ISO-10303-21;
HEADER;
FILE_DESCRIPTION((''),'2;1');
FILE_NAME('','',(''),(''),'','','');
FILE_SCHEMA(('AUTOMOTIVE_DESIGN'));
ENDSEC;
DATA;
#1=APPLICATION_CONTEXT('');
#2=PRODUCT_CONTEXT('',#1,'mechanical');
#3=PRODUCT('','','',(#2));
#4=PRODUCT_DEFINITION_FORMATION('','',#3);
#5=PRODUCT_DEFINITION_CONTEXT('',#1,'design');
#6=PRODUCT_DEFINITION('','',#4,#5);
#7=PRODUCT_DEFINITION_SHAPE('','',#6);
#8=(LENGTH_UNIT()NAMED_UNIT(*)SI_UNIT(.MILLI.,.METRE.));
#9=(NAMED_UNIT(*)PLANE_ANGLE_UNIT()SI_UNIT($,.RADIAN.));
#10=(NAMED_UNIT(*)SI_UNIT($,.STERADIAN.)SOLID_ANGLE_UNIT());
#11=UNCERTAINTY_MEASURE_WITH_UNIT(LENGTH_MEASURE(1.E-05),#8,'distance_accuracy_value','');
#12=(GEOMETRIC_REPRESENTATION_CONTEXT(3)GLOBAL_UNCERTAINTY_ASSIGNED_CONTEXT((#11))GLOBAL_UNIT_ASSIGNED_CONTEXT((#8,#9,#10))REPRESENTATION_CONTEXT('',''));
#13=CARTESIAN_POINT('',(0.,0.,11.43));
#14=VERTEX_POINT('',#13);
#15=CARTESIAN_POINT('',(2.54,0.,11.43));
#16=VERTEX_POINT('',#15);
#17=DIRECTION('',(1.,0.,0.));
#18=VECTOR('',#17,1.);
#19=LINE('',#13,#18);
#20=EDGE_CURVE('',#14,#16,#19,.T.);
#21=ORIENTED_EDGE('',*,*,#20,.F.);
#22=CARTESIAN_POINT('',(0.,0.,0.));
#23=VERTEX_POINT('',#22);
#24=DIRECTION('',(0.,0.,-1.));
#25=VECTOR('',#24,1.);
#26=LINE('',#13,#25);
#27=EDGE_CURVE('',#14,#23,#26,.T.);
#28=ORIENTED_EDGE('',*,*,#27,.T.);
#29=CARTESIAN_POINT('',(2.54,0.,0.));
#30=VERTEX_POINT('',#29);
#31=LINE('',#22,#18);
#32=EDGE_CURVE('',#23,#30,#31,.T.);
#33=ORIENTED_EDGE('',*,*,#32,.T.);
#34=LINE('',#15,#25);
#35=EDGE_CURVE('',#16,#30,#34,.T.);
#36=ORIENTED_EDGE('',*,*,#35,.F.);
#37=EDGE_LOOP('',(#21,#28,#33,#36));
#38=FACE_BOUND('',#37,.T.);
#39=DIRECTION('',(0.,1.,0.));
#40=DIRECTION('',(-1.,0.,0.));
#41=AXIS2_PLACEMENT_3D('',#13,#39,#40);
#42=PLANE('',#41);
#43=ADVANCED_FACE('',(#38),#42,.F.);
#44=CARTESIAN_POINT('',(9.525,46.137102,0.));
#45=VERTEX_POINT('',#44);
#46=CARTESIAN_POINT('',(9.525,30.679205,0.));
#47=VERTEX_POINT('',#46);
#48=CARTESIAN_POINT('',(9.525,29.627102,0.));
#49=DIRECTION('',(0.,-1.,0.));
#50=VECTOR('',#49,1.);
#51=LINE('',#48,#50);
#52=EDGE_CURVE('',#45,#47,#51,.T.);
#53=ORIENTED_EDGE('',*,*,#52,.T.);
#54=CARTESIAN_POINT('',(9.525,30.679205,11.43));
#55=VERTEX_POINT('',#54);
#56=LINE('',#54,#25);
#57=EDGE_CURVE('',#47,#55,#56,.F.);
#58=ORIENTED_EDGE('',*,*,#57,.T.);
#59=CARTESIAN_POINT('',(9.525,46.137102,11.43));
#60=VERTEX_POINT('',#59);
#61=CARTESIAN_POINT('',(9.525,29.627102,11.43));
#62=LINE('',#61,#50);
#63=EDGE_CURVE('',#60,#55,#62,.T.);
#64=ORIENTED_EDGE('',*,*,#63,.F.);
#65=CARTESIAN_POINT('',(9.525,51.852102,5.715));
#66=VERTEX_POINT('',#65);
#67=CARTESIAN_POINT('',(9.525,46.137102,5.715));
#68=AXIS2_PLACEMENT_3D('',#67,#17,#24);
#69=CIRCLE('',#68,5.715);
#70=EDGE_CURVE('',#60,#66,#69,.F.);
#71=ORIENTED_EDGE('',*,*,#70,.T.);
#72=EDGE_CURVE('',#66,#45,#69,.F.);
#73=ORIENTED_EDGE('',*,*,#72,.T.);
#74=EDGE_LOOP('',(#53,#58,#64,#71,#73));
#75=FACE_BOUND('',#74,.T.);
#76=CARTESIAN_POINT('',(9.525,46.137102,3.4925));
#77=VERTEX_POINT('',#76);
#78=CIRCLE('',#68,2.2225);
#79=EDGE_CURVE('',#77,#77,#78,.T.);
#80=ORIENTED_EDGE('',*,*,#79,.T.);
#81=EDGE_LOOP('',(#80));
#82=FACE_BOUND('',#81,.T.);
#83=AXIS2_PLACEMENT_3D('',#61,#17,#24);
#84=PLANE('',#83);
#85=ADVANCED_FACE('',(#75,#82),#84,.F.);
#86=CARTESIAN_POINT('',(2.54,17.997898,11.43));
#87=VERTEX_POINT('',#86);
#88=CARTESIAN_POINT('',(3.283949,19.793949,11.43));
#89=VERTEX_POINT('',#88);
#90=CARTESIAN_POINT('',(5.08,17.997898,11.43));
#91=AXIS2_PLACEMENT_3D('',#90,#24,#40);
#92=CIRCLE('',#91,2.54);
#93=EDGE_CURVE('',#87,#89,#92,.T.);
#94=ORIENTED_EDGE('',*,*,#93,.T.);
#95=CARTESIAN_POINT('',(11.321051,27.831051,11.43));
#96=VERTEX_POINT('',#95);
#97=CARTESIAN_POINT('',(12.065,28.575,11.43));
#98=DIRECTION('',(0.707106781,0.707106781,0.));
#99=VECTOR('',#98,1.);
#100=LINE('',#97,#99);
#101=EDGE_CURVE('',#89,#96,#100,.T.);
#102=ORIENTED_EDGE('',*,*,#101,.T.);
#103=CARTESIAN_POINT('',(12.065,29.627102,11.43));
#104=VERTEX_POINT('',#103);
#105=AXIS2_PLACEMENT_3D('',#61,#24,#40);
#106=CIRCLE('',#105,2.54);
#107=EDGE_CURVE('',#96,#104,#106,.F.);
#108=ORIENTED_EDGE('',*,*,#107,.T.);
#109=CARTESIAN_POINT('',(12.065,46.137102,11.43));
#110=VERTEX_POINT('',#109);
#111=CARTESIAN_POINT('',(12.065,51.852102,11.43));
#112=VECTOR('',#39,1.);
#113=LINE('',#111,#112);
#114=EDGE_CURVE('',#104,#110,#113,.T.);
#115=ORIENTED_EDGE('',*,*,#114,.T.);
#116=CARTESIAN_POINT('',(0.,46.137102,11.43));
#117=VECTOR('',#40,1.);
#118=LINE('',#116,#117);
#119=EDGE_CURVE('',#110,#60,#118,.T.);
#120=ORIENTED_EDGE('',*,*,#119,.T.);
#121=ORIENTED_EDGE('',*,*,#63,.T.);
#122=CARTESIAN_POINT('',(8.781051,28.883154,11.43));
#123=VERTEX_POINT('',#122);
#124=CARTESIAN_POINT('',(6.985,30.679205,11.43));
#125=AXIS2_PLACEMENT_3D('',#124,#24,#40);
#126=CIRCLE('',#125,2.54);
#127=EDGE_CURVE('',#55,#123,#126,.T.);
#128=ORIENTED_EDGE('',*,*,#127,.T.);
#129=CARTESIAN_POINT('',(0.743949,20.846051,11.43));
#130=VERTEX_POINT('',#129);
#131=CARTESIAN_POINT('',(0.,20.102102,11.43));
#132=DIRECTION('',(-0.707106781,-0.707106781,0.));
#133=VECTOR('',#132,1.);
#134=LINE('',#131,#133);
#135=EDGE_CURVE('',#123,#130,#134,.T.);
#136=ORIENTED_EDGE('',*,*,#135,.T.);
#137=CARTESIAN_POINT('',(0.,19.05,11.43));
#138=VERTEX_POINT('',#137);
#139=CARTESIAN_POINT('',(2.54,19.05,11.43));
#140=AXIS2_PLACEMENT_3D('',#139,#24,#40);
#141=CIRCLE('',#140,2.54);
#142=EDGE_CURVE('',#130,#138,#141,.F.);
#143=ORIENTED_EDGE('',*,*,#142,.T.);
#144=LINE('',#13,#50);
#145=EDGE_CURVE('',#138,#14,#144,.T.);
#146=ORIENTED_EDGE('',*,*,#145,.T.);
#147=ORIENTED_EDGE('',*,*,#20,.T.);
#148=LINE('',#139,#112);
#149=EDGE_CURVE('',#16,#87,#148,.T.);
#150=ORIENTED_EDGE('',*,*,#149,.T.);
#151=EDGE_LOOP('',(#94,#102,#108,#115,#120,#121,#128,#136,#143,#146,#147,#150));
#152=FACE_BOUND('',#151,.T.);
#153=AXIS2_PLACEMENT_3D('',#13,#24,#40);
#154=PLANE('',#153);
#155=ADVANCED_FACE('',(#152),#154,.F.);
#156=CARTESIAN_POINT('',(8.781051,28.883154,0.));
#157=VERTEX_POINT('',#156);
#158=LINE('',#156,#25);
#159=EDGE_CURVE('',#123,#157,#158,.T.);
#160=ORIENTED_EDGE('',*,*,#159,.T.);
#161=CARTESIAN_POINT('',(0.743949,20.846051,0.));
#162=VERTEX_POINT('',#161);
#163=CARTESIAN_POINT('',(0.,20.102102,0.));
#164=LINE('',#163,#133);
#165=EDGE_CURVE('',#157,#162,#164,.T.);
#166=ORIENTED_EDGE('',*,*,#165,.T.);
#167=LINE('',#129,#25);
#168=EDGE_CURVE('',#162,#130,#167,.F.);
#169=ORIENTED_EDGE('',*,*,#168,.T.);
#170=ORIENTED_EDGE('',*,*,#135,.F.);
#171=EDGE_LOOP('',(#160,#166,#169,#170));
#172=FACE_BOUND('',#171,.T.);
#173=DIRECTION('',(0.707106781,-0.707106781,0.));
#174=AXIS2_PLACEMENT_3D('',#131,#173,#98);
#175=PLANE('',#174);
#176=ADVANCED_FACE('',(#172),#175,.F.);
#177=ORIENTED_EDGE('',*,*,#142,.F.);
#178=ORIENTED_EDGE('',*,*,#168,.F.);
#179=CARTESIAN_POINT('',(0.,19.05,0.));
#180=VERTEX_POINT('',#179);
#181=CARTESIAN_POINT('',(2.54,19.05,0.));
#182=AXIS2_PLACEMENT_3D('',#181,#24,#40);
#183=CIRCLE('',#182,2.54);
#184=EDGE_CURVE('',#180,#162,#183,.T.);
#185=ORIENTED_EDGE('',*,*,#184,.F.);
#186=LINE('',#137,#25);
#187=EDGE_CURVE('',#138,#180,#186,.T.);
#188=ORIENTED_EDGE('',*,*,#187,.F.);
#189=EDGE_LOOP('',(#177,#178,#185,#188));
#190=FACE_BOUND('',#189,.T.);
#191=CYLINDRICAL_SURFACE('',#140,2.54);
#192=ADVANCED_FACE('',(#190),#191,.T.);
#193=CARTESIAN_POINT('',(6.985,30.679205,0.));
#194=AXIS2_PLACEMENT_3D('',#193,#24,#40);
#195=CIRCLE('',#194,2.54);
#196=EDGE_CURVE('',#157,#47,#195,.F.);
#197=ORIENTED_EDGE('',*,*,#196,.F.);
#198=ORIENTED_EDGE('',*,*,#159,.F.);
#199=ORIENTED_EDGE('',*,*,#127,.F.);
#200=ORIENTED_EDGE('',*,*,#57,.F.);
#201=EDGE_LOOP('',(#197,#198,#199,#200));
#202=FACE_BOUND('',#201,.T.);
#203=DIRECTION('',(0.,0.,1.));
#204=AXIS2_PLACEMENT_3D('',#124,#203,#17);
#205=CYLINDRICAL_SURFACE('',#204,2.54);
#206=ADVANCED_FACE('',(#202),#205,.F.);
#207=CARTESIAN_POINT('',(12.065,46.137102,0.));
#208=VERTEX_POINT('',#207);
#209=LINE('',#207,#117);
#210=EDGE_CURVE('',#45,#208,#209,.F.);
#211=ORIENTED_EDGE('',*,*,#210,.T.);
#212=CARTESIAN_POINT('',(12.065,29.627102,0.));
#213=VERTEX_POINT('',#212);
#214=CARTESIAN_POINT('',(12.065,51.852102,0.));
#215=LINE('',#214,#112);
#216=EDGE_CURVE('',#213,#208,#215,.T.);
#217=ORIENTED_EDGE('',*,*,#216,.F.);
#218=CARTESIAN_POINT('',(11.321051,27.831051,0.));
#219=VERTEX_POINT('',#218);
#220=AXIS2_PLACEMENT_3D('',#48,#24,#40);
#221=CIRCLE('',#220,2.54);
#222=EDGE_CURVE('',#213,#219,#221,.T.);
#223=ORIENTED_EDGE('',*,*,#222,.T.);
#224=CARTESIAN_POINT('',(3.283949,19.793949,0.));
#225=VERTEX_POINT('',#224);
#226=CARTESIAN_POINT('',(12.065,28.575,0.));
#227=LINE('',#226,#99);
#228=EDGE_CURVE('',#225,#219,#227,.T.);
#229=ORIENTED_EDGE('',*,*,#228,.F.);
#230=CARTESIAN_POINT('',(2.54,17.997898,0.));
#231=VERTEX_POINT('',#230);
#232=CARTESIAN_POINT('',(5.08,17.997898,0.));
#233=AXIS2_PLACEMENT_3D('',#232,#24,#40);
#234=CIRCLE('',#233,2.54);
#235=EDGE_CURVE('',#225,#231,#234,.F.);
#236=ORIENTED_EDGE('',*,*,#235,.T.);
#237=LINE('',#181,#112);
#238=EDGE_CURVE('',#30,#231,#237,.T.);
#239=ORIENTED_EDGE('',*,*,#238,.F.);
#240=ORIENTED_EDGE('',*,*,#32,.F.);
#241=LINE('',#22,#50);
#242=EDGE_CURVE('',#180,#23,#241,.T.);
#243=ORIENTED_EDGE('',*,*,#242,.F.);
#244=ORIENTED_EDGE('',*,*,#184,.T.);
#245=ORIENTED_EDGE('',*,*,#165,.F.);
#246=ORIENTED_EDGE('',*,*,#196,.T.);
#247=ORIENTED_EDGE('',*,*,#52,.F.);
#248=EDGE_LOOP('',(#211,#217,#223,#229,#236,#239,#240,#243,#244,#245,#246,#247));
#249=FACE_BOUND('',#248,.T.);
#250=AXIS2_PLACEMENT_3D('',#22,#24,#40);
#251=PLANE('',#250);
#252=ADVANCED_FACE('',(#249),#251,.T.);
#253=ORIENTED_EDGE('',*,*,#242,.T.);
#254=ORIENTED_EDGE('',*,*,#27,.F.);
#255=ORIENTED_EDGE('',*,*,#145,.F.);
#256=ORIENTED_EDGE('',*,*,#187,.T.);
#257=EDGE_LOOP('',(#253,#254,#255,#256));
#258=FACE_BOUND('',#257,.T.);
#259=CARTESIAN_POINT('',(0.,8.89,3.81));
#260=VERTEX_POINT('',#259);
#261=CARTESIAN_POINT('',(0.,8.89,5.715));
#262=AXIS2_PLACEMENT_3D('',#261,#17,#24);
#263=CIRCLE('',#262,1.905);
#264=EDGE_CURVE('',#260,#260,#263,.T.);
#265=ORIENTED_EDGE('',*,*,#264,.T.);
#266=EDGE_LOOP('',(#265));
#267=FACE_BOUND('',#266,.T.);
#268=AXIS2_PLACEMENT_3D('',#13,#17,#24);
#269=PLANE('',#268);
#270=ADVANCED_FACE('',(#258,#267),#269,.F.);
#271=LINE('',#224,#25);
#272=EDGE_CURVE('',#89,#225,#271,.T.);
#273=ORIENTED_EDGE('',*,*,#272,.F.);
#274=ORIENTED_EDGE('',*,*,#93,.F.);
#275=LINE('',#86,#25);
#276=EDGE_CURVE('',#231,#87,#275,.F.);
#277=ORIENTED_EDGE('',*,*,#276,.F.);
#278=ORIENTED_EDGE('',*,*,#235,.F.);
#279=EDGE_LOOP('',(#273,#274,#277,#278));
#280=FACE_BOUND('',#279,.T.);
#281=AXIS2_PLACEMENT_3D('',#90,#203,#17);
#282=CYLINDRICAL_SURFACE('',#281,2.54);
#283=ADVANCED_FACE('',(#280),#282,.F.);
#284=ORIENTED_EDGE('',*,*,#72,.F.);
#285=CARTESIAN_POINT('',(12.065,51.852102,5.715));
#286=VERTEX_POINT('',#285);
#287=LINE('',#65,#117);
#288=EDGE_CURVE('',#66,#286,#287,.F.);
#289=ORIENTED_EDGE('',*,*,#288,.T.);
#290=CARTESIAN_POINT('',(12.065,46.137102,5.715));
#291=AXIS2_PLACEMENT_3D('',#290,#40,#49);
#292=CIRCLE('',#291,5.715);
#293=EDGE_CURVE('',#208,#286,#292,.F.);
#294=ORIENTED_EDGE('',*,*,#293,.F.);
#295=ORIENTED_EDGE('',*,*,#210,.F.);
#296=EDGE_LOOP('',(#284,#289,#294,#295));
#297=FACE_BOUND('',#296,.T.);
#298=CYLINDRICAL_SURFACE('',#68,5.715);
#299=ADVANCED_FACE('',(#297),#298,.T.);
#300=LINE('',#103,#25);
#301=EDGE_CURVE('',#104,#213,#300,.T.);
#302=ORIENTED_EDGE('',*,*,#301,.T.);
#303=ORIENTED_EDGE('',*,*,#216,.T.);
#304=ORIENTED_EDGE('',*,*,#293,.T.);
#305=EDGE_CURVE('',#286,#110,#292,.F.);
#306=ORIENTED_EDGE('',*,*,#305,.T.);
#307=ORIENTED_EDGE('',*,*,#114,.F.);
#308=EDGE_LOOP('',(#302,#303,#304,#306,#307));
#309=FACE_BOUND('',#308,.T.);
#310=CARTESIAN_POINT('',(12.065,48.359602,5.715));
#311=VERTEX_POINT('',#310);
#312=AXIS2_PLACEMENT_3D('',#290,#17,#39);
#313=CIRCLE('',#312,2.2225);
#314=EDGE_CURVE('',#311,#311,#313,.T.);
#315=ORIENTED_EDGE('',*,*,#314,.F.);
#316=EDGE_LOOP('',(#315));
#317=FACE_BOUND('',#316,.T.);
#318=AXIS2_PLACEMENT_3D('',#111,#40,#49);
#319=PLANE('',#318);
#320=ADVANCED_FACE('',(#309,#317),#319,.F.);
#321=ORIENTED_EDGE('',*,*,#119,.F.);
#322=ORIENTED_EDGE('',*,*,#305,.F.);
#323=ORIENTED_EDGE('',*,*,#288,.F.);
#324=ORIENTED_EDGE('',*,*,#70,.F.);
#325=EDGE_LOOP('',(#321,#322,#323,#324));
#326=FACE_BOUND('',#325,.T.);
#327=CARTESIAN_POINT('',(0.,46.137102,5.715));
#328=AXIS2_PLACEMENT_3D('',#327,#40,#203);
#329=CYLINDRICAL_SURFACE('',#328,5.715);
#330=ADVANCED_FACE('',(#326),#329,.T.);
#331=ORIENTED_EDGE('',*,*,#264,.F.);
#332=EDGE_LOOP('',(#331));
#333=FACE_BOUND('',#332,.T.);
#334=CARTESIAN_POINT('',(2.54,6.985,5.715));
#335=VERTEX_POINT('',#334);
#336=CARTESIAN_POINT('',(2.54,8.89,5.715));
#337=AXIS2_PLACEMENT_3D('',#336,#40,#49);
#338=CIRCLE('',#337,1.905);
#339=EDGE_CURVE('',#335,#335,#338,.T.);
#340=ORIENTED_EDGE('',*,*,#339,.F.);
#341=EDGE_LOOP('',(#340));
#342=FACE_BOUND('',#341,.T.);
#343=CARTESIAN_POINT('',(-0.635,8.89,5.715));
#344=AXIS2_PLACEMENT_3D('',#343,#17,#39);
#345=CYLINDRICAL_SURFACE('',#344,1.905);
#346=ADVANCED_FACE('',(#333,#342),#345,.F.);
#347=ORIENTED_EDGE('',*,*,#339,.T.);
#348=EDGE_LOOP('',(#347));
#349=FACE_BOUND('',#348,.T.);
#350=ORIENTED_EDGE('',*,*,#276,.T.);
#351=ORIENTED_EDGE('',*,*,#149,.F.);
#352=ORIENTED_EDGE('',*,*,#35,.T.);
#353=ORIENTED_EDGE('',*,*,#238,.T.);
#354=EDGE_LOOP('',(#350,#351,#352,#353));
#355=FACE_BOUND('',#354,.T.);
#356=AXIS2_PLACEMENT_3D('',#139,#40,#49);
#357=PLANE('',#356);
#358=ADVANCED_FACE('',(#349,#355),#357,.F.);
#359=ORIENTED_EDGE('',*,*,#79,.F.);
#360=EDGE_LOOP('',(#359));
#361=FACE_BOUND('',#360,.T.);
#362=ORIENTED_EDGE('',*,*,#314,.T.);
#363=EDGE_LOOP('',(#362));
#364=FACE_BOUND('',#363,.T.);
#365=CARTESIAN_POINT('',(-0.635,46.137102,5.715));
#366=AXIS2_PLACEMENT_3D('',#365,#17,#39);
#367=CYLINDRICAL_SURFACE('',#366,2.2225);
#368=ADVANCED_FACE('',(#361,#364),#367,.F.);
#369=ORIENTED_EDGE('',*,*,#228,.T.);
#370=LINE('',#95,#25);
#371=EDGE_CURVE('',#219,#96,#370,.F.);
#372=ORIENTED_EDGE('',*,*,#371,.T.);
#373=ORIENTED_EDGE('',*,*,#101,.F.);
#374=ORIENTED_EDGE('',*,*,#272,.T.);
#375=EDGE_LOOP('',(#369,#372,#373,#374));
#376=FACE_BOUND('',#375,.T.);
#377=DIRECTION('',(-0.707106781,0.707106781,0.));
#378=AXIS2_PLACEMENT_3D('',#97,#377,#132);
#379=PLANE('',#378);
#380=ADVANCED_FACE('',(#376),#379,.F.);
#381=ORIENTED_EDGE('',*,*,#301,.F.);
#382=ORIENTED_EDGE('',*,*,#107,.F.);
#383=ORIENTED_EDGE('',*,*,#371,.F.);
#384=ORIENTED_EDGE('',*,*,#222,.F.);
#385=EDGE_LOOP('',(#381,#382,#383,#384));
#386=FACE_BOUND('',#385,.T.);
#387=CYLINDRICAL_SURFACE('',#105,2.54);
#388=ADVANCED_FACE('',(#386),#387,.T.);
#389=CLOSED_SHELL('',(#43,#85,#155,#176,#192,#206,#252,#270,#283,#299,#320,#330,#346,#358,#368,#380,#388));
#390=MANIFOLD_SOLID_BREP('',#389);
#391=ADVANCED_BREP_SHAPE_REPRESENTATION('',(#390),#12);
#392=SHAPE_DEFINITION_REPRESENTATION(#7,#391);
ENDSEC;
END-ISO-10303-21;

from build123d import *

# Parameters (mm, degrees)
BOSS_EXTRUDE1_DEPTH = 11.43
FILLET1_R           = 5.715
SKETCH3_R           = 2.2225
SKETCH3_R_2         = 1.905
CUT_EXTRUDE1_DEPTH  = 12.7
FILLET2_R           = 2.54


with BuildPart() as part:
    # Sketch1 → Boss-Extrude1 (new body)
    with BuildSketch(Plane.XY):
        Polygon((0, 0), (0, 20.102102448), (9.525, 29.627102448), (9.525, 51.852102448), (12.065, 51.852102448), (12.065, 28.575), (2.54, 19.05), (2.54, 0), align=None)
    extrude(amount=BOSS_EXTRUDE1_DEPTH)

    # Fillet1
    fillet1_edges = [part.edges().sort_by_distance(p)[0] for p in [
        (10.795, 51.852102448, 0),
        (10.795, 51.852102448, 11.43),
    ]]
    fillet(fillet1_edges, radius=FILLET1_R - 0.0001)  # a hair under: the kernel refuses the full size

    # Sketch3 → Cut-Extrude1 (cut)
    with BuildSketch(Plane(origin=(12.065, 0, 0), x_dir=(0, 0, -1), z_dir=(1, 0, 0))):
        with Locations(Location((-5.715, 46.137102448, 0), (0, 0, 90))):
            Circle(SKETCH3_R)
        with Locations((-5.715, 8.89)):
            Circle(SKETCH3_R_2)
    extrude(amount=-CUT_EXTRUDE1_DEPTH, mode=Mode.SUBTRACT)

    # Fillet2
    fillet2_edges = [part.edges().sort_by_distance(p)[0] for p in [
        (0, 20.102102448, 5.715),
        (9.525, 29.627102448, 5.715),
        (12.065, 28.575, 5.715),
        (2.54, 19.05, 5.715),
    ]]
    fillet(fillet2_edges, radius=FILLET2_R)


solid = part.part
